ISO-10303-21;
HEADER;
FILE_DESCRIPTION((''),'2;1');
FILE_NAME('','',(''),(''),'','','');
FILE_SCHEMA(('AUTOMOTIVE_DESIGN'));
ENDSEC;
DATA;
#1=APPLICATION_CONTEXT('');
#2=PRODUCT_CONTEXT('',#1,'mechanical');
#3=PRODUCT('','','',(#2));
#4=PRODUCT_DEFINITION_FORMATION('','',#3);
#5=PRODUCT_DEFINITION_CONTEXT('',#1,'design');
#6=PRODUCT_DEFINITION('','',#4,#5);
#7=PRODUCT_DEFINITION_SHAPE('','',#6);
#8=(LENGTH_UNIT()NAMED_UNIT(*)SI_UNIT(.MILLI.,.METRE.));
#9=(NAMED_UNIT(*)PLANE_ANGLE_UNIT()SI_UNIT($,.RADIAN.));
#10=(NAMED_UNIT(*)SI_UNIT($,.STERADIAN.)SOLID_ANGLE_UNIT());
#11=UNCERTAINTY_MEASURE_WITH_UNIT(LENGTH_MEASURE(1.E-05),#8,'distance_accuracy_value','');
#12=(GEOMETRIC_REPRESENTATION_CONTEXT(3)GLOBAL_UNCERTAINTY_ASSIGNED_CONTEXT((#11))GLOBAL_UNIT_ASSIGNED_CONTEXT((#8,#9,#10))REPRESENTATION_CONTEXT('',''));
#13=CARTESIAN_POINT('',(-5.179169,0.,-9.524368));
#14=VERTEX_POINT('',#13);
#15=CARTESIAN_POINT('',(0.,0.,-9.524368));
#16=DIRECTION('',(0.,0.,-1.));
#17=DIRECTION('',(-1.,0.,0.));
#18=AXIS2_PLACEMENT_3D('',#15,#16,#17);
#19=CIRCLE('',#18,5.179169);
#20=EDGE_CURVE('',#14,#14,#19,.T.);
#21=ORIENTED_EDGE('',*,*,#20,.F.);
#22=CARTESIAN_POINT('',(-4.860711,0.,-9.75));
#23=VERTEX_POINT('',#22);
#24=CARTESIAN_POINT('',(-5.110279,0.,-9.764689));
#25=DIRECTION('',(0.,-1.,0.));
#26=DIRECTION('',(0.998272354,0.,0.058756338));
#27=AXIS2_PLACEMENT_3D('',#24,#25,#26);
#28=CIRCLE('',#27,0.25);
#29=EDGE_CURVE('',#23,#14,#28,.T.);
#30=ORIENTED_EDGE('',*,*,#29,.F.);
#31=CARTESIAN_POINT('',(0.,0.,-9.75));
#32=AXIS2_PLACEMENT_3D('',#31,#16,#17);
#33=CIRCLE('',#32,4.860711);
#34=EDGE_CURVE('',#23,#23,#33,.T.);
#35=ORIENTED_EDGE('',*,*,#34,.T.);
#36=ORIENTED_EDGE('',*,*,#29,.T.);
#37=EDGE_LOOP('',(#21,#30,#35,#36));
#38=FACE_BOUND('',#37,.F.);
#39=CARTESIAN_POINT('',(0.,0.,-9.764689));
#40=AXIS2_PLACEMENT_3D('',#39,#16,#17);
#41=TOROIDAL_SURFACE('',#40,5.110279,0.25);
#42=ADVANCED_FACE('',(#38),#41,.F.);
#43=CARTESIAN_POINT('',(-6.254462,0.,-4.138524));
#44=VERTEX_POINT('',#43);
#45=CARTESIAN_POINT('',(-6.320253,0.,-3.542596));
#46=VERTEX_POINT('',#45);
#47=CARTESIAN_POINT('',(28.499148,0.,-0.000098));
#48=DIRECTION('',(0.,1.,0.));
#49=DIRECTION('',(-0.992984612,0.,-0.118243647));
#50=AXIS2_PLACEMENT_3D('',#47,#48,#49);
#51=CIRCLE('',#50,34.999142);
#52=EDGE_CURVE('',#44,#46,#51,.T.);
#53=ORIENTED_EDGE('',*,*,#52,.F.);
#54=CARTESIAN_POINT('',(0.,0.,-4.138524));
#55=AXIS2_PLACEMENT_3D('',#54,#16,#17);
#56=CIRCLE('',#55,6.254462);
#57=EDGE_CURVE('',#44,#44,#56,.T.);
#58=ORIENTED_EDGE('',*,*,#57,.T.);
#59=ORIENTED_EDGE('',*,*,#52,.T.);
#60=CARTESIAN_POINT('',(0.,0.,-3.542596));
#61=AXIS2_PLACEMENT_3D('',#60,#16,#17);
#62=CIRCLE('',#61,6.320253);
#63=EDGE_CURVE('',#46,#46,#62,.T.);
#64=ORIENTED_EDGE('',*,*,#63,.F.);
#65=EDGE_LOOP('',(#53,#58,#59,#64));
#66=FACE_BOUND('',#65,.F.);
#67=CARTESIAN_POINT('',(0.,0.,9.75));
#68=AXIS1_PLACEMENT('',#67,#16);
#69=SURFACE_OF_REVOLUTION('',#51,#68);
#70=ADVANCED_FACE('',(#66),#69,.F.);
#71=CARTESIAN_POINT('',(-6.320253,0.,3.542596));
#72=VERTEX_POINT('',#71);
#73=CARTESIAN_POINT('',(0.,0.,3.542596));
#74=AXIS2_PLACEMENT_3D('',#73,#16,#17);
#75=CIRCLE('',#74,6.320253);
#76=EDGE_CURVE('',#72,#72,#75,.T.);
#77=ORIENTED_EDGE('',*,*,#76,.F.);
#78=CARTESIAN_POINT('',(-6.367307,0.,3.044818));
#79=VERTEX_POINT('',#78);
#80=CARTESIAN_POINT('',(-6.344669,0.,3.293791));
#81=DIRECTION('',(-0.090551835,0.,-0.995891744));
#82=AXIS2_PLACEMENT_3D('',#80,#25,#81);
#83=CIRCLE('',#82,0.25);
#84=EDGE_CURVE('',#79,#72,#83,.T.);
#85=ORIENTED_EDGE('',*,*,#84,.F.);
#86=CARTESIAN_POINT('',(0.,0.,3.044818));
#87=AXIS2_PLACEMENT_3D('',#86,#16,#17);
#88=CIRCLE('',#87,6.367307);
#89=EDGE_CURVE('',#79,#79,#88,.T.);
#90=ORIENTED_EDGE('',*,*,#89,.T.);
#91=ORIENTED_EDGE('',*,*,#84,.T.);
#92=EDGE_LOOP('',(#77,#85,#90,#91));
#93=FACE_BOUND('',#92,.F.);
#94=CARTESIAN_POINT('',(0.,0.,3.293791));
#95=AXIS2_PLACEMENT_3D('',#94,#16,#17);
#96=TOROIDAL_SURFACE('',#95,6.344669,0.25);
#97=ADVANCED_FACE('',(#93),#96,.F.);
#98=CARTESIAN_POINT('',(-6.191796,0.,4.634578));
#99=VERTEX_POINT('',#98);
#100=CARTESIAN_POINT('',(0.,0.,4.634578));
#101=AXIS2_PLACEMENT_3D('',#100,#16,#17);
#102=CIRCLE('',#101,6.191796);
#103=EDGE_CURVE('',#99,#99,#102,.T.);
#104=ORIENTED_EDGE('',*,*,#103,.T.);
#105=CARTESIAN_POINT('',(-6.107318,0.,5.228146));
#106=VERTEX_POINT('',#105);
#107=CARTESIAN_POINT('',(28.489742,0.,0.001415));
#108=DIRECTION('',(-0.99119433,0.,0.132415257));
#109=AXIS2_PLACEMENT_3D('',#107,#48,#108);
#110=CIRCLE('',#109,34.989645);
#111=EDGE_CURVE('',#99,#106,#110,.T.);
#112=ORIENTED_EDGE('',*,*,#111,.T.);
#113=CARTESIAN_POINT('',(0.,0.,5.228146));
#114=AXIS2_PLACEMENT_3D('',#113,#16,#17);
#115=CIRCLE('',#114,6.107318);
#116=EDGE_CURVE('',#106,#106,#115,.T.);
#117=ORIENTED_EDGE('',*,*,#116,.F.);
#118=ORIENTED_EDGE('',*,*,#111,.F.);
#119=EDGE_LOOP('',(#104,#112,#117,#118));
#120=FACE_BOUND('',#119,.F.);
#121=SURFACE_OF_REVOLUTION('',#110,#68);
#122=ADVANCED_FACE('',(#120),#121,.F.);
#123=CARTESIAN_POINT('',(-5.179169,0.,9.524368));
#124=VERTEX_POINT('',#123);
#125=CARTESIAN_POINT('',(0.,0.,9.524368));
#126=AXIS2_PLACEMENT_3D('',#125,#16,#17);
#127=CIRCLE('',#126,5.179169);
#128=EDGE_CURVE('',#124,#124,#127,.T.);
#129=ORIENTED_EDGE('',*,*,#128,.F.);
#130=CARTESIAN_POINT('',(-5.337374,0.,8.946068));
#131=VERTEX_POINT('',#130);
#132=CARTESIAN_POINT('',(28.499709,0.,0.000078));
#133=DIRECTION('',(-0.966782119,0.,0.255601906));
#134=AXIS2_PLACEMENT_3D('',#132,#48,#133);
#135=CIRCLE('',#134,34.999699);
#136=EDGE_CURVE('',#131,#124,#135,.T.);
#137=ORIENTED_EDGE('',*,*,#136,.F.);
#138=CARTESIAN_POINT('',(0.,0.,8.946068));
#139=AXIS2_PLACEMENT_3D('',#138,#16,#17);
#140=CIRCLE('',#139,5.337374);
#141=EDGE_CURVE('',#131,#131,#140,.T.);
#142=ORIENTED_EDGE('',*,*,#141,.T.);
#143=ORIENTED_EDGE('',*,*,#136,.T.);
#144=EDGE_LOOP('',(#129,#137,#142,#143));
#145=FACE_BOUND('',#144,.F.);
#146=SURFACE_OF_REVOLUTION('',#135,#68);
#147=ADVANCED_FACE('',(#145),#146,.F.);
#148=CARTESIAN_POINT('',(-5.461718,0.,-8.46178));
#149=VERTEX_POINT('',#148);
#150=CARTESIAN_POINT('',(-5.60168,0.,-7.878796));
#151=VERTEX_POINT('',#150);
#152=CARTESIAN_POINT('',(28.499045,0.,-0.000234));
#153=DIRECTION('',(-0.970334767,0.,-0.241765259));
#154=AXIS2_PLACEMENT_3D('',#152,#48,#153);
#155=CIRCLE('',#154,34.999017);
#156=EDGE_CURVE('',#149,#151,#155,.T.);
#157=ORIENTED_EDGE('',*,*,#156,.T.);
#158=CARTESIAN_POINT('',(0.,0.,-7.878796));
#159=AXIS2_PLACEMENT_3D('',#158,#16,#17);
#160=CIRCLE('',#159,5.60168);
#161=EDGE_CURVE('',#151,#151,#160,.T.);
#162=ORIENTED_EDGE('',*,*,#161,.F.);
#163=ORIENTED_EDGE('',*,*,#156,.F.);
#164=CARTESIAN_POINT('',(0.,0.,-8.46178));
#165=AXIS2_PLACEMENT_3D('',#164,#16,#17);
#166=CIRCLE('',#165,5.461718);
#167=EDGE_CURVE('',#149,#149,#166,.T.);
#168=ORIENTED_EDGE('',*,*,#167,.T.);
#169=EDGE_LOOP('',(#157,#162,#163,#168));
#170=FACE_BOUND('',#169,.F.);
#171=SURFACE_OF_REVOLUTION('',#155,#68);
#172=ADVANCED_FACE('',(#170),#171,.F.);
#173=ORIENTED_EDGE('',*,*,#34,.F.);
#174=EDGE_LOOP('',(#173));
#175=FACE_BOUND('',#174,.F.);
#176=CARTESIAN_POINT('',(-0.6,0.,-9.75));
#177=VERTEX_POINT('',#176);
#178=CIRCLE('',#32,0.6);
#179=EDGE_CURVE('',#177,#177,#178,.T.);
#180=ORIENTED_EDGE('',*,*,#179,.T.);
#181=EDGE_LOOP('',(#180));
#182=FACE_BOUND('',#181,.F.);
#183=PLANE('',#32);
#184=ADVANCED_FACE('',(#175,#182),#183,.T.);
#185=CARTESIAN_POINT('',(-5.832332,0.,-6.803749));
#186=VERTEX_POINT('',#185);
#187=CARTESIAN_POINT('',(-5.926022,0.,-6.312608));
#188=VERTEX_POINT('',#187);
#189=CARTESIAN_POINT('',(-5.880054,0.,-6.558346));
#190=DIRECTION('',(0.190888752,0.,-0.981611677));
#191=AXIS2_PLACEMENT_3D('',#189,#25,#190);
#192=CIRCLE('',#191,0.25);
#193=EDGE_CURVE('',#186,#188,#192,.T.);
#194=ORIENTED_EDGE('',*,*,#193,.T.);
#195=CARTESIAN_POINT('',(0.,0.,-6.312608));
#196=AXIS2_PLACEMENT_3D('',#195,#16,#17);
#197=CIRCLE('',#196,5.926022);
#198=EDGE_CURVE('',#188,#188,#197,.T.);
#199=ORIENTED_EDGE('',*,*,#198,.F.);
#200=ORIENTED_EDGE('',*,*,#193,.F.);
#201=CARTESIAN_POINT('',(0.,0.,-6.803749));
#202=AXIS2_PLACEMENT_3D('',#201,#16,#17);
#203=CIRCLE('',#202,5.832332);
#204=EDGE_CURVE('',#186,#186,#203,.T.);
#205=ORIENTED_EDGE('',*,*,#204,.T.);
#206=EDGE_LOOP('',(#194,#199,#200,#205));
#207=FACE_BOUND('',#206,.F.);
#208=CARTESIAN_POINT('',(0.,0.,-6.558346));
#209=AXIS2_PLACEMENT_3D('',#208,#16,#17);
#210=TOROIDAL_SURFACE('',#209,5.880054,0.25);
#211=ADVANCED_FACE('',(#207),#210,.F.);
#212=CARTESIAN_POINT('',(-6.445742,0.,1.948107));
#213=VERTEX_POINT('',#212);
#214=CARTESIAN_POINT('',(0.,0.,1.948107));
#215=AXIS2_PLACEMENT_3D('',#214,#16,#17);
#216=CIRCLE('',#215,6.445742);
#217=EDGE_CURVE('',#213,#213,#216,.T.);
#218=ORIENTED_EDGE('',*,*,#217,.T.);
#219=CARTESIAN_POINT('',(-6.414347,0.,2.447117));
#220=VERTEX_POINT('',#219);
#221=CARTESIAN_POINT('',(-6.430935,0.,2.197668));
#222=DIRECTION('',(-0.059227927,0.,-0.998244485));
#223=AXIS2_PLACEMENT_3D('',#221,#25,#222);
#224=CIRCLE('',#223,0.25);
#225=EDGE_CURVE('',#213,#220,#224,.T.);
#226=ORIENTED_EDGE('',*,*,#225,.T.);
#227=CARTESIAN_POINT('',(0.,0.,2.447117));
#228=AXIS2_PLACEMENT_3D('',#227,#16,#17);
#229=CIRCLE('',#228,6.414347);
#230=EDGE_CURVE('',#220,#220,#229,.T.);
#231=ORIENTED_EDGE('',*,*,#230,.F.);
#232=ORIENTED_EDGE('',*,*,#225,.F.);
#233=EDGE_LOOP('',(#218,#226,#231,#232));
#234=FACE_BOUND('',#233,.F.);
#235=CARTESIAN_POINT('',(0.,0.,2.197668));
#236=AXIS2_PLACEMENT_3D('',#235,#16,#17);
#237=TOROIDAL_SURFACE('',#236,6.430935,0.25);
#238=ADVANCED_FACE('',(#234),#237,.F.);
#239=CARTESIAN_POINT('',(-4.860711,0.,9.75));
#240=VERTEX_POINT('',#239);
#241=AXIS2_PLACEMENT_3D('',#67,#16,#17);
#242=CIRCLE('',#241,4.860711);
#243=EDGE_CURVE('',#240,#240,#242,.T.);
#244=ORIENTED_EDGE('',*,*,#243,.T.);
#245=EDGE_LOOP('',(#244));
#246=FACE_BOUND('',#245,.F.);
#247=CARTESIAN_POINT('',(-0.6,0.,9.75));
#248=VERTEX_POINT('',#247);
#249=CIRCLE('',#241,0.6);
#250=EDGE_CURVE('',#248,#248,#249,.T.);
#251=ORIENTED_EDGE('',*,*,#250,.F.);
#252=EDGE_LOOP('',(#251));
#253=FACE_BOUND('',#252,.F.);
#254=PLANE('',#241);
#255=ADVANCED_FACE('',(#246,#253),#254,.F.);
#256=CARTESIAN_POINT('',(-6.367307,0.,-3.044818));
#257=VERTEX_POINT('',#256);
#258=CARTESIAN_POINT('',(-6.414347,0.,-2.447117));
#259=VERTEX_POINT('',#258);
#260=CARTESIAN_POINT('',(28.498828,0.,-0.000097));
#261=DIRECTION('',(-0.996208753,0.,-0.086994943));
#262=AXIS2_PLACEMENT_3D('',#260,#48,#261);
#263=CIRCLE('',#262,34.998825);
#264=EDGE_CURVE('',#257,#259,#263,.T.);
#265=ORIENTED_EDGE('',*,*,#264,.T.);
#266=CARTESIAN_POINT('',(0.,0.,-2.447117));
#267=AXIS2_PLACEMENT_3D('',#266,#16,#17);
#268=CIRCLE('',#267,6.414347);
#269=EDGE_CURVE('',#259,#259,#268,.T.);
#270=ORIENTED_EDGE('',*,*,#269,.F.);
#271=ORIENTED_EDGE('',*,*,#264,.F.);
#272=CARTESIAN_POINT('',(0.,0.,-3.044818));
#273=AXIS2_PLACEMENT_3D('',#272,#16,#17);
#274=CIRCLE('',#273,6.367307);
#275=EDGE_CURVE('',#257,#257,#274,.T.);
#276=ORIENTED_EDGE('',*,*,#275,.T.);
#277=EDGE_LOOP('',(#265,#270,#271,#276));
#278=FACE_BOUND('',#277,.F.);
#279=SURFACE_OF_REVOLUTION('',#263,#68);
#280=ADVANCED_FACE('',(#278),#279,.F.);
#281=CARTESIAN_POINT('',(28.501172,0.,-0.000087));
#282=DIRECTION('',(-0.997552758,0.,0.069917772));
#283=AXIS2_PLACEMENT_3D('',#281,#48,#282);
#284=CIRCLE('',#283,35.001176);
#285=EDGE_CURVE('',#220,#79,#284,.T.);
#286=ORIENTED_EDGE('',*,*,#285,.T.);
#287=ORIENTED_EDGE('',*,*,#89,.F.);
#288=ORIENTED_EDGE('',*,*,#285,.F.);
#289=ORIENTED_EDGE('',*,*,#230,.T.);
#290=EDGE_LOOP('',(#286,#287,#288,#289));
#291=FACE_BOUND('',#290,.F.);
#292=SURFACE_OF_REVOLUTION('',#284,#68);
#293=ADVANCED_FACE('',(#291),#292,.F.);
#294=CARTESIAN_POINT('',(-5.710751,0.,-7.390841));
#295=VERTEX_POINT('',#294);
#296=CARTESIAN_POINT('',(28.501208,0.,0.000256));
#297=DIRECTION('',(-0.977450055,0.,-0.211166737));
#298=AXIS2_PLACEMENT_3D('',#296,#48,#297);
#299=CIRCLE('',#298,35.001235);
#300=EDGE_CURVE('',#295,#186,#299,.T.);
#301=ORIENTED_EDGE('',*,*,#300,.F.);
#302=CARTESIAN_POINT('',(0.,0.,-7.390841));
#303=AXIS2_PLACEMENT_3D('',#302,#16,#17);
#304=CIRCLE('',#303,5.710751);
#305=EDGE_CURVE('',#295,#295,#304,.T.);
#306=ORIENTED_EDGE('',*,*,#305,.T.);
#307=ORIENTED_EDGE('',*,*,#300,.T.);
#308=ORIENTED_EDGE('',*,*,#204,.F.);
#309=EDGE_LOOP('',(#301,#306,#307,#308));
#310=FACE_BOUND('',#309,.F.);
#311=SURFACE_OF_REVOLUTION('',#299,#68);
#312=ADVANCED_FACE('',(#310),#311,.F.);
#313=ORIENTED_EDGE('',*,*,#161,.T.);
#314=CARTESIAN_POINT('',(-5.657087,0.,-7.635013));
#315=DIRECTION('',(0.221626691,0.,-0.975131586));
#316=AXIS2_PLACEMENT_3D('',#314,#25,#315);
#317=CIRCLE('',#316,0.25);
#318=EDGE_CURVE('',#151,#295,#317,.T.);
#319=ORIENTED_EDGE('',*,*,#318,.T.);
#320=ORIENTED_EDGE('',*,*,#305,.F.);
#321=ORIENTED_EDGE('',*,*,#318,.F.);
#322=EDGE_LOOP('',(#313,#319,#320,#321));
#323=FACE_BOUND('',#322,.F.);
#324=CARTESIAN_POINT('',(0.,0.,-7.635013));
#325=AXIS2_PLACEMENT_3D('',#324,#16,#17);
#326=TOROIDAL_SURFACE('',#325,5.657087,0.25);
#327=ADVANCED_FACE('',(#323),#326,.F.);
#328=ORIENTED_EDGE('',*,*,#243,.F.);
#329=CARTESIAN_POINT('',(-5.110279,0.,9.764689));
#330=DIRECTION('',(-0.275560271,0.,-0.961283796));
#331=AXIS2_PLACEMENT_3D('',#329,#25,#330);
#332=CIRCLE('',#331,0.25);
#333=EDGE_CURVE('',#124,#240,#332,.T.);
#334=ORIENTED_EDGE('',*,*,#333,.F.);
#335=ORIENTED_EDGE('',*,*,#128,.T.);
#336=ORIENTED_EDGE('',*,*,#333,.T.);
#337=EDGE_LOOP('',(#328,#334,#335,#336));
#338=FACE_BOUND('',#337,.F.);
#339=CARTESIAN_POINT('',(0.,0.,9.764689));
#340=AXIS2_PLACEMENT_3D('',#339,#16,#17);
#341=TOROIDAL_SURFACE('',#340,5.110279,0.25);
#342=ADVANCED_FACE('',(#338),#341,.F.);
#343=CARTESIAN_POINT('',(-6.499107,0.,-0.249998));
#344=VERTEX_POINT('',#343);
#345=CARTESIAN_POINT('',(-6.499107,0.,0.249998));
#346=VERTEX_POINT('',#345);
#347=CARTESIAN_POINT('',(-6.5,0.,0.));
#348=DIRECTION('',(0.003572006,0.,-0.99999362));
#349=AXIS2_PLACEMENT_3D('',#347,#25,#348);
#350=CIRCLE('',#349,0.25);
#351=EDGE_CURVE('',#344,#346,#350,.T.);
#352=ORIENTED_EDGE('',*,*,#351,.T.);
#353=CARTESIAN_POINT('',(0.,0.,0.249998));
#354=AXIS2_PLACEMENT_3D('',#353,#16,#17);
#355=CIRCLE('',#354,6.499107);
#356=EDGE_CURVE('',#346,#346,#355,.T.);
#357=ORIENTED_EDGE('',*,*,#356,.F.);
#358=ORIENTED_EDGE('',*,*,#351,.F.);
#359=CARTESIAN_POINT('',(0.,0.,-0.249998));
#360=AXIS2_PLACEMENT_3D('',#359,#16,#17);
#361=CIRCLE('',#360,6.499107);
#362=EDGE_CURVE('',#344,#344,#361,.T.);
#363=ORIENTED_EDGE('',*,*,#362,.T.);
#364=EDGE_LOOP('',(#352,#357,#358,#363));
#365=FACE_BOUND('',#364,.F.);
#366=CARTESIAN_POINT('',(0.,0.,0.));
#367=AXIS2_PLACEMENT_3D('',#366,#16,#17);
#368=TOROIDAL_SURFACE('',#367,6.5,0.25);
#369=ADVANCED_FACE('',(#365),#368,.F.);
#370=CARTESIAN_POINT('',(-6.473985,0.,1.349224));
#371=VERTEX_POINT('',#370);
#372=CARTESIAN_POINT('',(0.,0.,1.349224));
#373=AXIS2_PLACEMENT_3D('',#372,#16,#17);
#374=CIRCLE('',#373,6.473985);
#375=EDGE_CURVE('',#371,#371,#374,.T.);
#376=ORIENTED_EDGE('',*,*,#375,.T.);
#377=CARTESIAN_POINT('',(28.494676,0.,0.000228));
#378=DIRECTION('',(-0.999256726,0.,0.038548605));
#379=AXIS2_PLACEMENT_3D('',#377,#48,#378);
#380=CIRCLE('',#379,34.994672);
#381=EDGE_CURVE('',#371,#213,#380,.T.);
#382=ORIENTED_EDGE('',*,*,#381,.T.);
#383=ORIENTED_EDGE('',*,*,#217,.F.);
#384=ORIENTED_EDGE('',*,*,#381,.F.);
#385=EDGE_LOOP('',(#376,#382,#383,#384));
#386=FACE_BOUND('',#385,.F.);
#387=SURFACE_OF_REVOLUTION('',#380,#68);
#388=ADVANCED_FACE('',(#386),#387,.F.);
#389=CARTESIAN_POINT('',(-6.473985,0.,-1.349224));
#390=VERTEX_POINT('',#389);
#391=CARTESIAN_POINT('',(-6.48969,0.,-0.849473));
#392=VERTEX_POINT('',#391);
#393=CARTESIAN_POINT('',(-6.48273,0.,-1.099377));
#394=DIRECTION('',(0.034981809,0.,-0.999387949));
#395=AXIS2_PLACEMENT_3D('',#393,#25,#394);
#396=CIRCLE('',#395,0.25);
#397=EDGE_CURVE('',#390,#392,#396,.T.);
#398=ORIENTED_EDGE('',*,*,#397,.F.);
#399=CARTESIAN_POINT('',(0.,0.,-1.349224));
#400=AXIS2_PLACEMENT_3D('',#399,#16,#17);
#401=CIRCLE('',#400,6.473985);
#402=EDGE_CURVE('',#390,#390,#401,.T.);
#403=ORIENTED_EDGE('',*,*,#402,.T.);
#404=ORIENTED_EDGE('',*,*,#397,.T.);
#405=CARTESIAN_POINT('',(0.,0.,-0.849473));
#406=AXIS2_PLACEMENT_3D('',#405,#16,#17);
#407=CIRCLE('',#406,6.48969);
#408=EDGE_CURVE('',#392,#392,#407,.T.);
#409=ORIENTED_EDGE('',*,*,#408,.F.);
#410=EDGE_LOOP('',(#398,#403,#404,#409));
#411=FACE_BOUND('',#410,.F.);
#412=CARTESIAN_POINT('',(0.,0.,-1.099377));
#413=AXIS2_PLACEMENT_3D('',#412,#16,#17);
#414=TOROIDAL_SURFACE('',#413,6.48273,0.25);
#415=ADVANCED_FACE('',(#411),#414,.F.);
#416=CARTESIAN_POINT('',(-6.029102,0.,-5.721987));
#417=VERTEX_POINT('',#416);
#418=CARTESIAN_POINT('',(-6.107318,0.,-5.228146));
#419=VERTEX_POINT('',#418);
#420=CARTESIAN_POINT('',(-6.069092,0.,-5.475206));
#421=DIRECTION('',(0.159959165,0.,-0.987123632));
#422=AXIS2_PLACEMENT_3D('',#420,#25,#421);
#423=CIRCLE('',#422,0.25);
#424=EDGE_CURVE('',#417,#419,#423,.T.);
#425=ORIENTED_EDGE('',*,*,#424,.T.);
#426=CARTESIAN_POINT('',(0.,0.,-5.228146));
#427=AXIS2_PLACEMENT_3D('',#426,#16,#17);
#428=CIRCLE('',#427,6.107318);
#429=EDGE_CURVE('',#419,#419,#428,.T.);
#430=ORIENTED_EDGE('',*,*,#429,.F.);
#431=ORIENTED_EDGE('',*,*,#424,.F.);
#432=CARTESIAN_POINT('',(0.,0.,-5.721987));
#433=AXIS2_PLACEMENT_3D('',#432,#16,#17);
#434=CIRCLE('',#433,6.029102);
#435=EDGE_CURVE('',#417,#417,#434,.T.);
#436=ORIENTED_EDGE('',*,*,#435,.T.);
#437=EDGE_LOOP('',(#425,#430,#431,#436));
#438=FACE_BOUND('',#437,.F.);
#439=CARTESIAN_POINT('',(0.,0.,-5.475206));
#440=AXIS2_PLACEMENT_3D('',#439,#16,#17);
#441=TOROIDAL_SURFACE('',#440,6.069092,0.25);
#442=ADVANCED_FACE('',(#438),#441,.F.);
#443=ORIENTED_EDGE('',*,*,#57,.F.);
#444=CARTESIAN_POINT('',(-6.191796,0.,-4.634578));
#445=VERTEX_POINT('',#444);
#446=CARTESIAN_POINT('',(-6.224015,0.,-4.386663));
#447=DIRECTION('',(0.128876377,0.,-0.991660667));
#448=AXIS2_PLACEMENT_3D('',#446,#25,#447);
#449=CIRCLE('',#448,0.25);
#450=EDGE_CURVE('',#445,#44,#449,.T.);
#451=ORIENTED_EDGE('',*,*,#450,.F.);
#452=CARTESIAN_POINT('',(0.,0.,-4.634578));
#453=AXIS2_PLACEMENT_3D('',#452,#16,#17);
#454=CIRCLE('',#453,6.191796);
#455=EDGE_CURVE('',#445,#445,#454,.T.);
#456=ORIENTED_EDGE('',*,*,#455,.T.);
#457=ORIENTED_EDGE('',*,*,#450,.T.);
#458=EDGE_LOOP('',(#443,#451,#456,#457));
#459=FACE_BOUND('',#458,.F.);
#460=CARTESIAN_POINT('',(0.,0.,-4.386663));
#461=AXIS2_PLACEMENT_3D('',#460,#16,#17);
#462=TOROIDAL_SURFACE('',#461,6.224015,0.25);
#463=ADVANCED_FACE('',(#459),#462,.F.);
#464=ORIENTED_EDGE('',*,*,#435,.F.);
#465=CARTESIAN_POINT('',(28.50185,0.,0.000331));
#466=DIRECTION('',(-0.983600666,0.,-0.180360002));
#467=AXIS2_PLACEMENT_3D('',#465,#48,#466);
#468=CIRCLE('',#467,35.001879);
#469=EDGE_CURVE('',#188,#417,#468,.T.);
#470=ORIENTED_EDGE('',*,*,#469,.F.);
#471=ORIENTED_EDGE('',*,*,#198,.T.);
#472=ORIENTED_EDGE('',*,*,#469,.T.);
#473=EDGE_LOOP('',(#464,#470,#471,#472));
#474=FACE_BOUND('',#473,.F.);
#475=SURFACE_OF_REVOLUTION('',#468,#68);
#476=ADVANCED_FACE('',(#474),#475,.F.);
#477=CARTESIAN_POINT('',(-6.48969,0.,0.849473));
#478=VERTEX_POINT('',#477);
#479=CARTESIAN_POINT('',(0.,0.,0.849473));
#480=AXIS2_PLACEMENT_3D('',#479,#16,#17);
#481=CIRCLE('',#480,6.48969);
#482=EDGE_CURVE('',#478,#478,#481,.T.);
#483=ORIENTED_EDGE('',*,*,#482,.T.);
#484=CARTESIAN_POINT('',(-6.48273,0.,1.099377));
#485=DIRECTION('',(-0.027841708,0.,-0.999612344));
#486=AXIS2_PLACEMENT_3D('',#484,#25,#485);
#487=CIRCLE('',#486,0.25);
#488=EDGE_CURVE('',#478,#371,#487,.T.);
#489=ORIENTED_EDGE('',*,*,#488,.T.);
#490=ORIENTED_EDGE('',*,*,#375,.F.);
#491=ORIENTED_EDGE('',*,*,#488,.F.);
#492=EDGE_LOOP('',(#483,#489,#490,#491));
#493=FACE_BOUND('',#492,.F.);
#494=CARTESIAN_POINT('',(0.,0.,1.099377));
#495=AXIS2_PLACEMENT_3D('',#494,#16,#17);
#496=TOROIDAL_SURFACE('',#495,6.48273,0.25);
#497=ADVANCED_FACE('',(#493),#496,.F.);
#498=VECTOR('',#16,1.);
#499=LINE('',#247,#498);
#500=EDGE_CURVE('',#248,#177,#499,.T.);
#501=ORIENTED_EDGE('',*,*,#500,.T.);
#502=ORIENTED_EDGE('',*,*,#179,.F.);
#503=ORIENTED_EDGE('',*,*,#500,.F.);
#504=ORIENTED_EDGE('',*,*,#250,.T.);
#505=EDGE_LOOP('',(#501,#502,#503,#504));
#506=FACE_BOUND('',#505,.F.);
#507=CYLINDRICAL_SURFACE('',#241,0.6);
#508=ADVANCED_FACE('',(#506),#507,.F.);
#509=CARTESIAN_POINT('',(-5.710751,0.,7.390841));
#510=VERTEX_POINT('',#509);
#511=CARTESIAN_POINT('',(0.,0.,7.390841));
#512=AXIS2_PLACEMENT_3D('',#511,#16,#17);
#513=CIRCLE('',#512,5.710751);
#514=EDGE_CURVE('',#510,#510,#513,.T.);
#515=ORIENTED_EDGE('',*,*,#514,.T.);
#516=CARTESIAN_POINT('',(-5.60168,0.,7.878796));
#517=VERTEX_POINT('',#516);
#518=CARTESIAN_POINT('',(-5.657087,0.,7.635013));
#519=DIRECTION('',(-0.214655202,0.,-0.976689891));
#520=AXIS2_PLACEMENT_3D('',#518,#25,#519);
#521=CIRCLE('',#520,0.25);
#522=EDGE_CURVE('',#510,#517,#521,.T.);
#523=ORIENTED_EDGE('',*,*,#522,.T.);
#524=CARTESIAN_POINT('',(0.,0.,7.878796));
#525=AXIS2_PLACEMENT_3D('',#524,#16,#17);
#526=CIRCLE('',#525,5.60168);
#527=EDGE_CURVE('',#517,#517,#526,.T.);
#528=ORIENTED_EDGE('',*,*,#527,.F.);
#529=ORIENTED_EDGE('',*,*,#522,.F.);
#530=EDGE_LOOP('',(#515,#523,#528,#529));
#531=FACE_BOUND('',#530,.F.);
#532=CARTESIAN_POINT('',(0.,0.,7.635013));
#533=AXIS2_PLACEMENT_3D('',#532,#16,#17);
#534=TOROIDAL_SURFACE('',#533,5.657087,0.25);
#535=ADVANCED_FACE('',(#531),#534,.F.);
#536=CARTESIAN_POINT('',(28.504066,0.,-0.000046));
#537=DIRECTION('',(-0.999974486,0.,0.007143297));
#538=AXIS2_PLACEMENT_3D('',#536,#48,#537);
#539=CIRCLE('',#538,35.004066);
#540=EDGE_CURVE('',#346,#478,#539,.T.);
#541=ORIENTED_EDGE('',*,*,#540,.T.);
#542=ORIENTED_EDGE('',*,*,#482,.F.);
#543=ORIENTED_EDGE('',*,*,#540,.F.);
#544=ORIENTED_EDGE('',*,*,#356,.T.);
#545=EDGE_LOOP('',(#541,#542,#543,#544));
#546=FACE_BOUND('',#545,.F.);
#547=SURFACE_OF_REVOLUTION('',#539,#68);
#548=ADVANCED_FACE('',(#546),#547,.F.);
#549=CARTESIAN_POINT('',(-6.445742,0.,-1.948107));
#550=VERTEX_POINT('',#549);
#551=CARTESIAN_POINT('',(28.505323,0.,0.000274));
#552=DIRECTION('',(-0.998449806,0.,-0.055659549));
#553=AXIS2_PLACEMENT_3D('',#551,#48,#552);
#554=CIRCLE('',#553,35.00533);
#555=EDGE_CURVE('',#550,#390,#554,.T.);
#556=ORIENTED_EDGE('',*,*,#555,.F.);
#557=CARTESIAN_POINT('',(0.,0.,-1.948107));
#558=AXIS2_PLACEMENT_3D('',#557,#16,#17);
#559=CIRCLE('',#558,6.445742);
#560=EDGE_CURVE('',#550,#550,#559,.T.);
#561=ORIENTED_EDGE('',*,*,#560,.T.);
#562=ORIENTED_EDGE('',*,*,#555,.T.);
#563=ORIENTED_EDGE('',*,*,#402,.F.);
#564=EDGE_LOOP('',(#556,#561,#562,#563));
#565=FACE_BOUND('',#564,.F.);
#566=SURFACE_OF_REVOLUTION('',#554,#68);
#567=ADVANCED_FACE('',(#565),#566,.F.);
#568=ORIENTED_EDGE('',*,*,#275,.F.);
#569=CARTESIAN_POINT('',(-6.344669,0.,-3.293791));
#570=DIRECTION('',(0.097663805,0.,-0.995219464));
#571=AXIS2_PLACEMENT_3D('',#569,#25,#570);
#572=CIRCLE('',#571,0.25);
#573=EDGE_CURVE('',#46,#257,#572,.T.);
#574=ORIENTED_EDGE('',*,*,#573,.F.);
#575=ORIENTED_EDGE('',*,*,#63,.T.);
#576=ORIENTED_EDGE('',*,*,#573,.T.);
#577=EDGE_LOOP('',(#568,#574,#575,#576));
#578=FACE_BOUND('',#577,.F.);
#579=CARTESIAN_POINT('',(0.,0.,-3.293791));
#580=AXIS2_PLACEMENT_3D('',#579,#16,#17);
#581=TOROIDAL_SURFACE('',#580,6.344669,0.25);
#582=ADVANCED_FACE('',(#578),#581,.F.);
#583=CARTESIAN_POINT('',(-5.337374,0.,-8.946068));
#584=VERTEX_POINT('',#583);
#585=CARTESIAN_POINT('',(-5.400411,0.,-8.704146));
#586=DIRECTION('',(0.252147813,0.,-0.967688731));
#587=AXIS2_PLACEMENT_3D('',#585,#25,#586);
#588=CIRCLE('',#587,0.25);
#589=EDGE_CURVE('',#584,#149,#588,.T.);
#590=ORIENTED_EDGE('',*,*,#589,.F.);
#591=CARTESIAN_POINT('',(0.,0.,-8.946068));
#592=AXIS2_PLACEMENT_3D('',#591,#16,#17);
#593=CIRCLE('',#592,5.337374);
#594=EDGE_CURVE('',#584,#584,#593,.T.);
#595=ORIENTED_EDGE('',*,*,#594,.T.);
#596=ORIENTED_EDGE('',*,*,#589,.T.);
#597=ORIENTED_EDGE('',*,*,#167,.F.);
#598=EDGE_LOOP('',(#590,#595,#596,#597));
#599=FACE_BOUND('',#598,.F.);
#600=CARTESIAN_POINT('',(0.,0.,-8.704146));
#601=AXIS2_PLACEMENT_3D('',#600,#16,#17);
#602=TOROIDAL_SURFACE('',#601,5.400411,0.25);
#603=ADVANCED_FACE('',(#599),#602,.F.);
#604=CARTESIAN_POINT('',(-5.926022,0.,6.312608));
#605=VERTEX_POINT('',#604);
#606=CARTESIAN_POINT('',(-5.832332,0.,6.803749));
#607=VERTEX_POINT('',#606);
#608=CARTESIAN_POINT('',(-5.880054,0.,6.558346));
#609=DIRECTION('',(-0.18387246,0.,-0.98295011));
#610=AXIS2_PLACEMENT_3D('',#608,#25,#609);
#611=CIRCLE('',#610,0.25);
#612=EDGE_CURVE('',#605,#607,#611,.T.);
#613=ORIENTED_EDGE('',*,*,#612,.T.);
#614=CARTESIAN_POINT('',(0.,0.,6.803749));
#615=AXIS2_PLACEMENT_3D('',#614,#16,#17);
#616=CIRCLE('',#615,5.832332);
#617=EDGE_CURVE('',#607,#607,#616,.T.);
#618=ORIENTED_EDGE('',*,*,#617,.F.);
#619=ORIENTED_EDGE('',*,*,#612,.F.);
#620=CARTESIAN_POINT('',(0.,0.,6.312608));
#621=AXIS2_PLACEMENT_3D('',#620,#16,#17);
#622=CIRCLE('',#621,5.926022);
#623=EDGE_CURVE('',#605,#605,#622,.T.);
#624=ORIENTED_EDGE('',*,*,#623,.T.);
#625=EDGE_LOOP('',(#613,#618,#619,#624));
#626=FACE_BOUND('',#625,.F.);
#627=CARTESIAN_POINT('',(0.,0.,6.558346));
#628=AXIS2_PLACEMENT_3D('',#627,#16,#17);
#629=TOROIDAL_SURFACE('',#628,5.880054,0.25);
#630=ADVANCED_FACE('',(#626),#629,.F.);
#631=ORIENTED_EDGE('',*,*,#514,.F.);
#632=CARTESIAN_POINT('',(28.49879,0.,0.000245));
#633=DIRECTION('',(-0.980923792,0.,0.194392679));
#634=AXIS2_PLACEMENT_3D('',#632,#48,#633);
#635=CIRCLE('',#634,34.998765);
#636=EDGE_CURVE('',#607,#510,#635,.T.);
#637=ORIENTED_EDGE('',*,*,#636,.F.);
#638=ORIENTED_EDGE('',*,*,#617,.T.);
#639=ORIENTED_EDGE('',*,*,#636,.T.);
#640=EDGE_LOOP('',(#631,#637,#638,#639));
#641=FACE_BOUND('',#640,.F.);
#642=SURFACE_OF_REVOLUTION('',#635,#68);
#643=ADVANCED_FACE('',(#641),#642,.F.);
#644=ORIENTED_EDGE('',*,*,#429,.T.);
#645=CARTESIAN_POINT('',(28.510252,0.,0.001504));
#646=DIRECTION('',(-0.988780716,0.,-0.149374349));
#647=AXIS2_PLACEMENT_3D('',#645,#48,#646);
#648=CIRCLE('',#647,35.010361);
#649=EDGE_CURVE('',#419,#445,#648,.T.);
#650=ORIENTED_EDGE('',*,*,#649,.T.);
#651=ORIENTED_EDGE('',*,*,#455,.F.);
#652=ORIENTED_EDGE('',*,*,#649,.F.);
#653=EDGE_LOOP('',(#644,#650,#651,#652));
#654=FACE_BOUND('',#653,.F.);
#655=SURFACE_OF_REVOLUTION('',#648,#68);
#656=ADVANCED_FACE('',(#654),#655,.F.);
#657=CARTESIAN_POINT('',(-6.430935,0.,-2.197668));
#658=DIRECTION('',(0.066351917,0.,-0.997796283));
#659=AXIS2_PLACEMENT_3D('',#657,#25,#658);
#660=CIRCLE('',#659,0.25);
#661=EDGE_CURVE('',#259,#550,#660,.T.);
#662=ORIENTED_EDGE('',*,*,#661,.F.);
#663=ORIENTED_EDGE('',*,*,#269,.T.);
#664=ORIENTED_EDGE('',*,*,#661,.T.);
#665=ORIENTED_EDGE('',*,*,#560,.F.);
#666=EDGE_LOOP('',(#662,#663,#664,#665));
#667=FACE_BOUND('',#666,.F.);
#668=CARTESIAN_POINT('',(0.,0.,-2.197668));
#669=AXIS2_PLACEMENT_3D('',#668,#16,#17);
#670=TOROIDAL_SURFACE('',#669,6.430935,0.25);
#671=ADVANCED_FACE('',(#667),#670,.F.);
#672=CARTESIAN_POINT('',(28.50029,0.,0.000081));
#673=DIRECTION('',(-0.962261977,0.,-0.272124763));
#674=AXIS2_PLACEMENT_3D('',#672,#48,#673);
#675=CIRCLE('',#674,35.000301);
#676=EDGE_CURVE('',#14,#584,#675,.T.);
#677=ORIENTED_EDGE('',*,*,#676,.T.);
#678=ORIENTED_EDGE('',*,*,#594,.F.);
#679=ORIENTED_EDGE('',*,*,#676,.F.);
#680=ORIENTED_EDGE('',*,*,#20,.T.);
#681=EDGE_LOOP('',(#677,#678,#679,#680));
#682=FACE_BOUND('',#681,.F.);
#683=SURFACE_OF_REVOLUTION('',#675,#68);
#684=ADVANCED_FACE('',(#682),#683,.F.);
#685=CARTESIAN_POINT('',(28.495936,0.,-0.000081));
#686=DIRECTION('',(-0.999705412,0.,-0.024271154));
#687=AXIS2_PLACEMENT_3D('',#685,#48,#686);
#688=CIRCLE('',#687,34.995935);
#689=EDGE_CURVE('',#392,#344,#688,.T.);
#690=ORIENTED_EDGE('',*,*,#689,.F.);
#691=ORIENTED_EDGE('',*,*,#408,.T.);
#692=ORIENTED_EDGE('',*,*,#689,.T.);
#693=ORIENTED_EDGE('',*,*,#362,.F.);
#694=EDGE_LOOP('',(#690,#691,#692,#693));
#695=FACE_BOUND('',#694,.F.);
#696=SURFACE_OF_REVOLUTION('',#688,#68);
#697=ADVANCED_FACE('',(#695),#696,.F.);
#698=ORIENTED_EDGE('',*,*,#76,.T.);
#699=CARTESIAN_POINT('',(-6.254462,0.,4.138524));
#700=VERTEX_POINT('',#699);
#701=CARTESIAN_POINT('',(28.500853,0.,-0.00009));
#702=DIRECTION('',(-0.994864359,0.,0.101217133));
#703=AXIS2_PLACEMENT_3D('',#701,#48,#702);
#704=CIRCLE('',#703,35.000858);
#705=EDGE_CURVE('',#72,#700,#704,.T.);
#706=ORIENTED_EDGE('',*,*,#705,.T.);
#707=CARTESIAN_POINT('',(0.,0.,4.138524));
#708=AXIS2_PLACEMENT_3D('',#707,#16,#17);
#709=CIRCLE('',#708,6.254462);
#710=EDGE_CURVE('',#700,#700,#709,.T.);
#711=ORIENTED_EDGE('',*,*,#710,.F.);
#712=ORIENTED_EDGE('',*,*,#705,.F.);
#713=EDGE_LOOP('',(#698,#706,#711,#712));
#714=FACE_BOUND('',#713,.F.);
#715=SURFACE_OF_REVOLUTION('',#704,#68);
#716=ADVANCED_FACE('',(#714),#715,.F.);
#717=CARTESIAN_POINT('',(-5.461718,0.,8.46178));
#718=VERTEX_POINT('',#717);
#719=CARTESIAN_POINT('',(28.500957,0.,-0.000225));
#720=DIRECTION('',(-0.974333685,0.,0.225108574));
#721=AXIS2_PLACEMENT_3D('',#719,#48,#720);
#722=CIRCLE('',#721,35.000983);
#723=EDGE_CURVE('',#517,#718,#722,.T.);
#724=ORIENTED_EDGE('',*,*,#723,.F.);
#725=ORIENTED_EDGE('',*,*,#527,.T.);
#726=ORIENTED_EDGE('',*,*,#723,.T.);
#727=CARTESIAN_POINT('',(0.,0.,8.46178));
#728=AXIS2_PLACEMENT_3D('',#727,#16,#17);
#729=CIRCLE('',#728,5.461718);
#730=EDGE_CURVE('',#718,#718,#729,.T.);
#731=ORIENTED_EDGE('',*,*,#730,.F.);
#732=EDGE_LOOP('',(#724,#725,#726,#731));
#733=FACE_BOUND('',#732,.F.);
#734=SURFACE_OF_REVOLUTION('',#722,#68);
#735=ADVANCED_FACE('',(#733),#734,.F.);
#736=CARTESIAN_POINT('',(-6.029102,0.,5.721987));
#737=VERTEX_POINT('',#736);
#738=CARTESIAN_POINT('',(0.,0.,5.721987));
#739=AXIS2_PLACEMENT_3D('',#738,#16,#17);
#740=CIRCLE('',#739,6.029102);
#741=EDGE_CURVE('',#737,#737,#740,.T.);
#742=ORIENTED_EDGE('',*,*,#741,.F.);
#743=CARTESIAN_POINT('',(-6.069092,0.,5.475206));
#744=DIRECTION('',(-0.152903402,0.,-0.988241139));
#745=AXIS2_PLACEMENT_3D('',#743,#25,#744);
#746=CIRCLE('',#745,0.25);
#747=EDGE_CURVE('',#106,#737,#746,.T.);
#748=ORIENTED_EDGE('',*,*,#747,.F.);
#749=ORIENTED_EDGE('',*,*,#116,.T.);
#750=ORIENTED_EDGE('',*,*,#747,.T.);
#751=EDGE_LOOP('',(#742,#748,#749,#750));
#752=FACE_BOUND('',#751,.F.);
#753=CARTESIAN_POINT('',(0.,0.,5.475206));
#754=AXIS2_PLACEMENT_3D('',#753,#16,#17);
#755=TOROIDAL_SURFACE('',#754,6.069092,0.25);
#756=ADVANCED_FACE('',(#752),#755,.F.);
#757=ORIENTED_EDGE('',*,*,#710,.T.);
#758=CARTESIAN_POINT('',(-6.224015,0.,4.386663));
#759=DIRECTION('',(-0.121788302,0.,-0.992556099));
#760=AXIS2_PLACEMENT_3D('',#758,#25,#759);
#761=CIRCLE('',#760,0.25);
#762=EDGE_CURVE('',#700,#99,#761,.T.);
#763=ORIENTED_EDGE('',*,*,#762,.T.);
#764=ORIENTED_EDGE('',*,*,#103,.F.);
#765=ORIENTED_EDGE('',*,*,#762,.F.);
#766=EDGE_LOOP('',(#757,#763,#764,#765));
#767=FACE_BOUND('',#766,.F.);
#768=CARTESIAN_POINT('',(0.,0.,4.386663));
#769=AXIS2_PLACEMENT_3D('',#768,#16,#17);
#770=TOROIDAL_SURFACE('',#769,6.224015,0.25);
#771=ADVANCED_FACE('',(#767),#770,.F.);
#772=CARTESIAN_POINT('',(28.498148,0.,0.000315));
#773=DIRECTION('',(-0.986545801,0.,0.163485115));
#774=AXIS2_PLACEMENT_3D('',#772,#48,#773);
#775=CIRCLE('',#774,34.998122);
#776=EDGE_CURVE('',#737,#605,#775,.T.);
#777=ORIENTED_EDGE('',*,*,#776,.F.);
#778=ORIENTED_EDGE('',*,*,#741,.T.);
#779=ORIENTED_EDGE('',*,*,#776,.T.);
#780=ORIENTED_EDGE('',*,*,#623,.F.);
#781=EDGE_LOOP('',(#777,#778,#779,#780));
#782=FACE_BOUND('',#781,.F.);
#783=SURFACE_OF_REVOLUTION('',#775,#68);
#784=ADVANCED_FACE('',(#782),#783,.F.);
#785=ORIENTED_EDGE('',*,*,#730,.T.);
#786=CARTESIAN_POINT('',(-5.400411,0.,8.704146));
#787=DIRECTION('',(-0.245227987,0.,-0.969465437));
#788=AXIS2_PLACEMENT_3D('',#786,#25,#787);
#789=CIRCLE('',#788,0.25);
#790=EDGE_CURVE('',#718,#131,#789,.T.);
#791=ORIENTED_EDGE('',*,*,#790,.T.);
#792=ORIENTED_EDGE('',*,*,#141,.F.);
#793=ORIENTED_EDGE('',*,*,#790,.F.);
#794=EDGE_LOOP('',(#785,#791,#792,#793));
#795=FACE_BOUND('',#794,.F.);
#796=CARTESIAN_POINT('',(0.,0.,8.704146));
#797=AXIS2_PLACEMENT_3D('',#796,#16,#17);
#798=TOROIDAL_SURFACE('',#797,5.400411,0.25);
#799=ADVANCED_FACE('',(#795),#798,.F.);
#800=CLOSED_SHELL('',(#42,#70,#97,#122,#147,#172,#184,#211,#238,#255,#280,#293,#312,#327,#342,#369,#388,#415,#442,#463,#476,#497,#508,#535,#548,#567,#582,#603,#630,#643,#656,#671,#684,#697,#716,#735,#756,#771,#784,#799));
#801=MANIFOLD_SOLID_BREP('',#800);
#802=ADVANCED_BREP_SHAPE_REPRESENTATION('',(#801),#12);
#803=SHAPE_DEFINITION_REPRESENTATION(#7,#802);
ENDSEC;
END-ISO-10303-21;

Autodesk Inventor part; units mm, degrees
ref_plane "YZ Plane" through (0, 0, 0) normal (1, 0, 0) x (0, 1, 0)
ref_plane "XZ Plane" through (0, 0, 0) normal (0, 1, 0) x (-1, 0, 0)
ref_plane "XY Plane" through (0, 0, 0) normal (0, 0, 1) x (1, 0, 0)
sketch "Sketch1" plane through (0, 0, 0) normal (0, 1, 0) x (-1, 0, 0)
  line L0 (6.5, 9.75) -> (0, 9.75)
  line L1 (0, 9.75) -> (0, -9.75)
  line L2 (0, -9.75) -> (6.5, -9.75)
  line L3 (6.5, -9.75) -> (6.5, 9.75)
  line L4 (0.6, 9.75) -> (0.6, -9.75)
  arc A0 (5.114543, -9.75) -> (5.114543, 9.75) centre (-28.5, 0) ccw
  circle A1 centre (6.5, 0) radius 0.25
  circle A2 centre (6.48273, 1.099377) radius 0.25
  circle A3 centre (6.430935, 2.197668) radius 0.25
  circle A4 centre (6.344669, 3.293791) radius 0.25
  circle A5 centre (6.224015, 4.386663) radius 0.25
  circle A6 centre (6.069092, 5.475206) radius 0.25
  circle A7 centre (5.880054, 6.558346) radius 0.25
  circle A8 centre (5.657087, 7.635013) radius 0.25
  circle A9 centre (5.400411, 8.704146) radius 0.25
  circle A10 centre (5.110279, 9.764689) radius 0.25
  circle A11 centre (4.786978, 10.815595) radius 0.25
  circle A12 centre (4.430827, 11.855827) radius 0.25
  circle A13 centre (4.042177, 12.884359) radius 0.25
  circle A14 centre (3.621412, 13.900176) radius 0.25
  circle A15 centre (3.168947, 14.902275) radius 0.25
  circle A16 centre (2.685228, 15.889667) radius 0.25
  circle A17 centre (2.170734, 16.861379) radius 0.25
  circle A18 centre (1.625971, 17.81645) radius 0.25
  circle A19 centre (1.051477, 18.753938) radius 0.25
  circle A20 centre (0.44782, 19.672918) radius 0.25
  circle A21 centre (-0.184405, 20.572484) radius 0.25
  circle A22 centre (-0.844575, 21.451747) radius 0.25
  circle A23 centre (-1.532037, 22.30984) radius 0.25
  circle A24 centre (-2.246113, 23.145915) radius 0.25
  circle A25 centre (-2.986098, 23.959149) radius 0.25
  circle A26 centre (-3.751263, 24.748737) radius 0.25
  circle A27 centre (-4.540851, 25.513902) radius 0.25
  circle A28 centre (-5.354085, 26.253887) radius 0.25
  circle A29 centre (-6.19016, 26.967963) radius 0.25
  circle A30 centre (-7.048253, 27.655425) radius 0.25
  circle A31 centre (-7.927516, 28.315595) radius 0.25
  circle A32 centre (-8.827082, 28.94782) radius 0.25
  circle A33 centre (-9.746062, 29.551477) radius 0.25
  circle A34 centre (-10.68355, 30.125971) radius 0.25
  circle A35 centre (-11.638621, 30.670734) radius 0.25
  circle A36 centre (-12.610333, 31.185228) radius 0.25
  circle A37 centre (-13.597725, 31.668947) radius 0.25
  circle A38 centre (-14.599824, 32.121412) radius 0.25
  circle A39 centre (-15.615641, 32.542177) radius 0.25
  circle A40 centre (-16.644173, 32.930827) radius 0.25
  circle A41 centre (-17.684405, 33.286978) radius 0.25
  circle A42 centre (-18.735311, 33.610279) radius 0.25
  circle A43 centre (-19.795854, 33.900411) radius 0.25
  circle A44 centre (-20.864987, 34.157087) radius 0.25
  circle A45 centre (-21.941654, 34.380054) radius 0.25
  circle A46 centre (-23.024794, 34.569092) radius 0.25
  circle A47 centre (-24.113337, 34.724015) radius 0.25
  circle A48 centre (-25.206209, 34.844669) radius 0.25
  circle A49 centre (-26.302332, 34.930935) radius 0.25
  circle A50 centre (-27.400623, 34.98273) radius 0.25
  circle A51 centre (-28.5, 35) radius 0.25
  circle A52 centre (-29.599377, 34.98273) radius 0.25
  circle A53 centre (-30.697668, 34.930935) radius 0.25
  circle A54 centre (-31.793791, 34.844669) radius 0.25
  circle A55 centre (-32.886663, 34.724015) radius 0.25
  circle A56 centre (-33.975206, 34.569092) radius 0.25
  circle A57 centre (-35.058346, 34.380054) radius 0.25
  circle A58 centre (-36.135013, 34.157087) radius 0.25
  circle A59 centre (-37.204146, 33.900411) radius 0.25
  circle A60 centre (-38.264689, 33.610279) radius 0.25
  circle A61 centre (-39.315595, 33.286978) radius 0.25
  circle A62 centre (-40.355827, 32.930827) radius 0.25
  circle A63 centre (-41.384359, 32.542177) radius 0.25
  circle A64 centre (-42.400176, 32.121412) radius 0.25
  circle A65 centre (-43.402275, 31.668947) radius 0.25
  circle A66 centre (-44.389667, 31.185228) radius 0.25
  circle A67 centre (-45.361379, 30.670734) radius 0.25
  circle A68 centre (-46.31645, 30.125971) radius 0.25
  circle A69 centre (-47.253938, 29.551477) radius 0.25
  circle A70 centre (-48.172918, 28.94782) radius 0.25
  circle A71 centre (-49.072484, 28.315595) radius 0.25
  circle A72 centre (-49.951747, 27.655425) radius 0.25
  circle A73 centre (-50.80984, 26.967963) radius 0.25
  circle A74 centre (-51.645915, 26.253887) radius 0.25
  circle A75 centre (-52.459149, 25.513902) radius 0.25
  circle A76 centre (-53.248737, 24.748737) radius 0.25
  circle A77 centre (-54.013902, 23.959149) radius 0.25
  circle A78 centre (-54.753887, 23.145915) radius 0.25
  circle A79 centre (-55.467963, 22.30984) radius 0.25
  circle A80 centre (-56.155425, 21.451747) radius 0.25
  circle A81 centre (-56.815595, 20.572484) radius 0.25
  circle A82 centre (-57.44782, 19.672918) radius 0.25
  circle A83 centre (-58.051477, 18.753938) radius 0.25
  circle A84 centre (-58.625971, 17.81645) radius 0.25
  circle A85 centre (-59.170734, 16.861379) radius 0.25
  circle A86 centre (-59.685228, 15.889667) radius 0.25
  circle A87 centre (-60.168947, 14.902275) radius 0.25
  circle A88 centre (-60.621412, 13.900176) radius 0.25
  circle A89 centre (-61.042177, 12.884359) radius 0.25
  circle A90 centre (-61.430827, 11.855827) radius 0.25
  circle A91 centre (-61.786978, 10.815595) radius 0.25
  circle A92 centre (-62.110279, 9.764689) radius 0.25
  circle A93 centre (-62.400411, 8.704146) radius 0.25
  circle A94 centre (-62.657087, 7.635013) radius 0.25
  circle A95 centre (-62.880054, 6.558346) radius 0.25
  circle A96 centre (-63.069092, 5.475206) radius 0.25
  circle A97 centre (-63.224015, 4.386663) radius 0.25
  circle A98 centre (-63.344669, 3.293791) radius 0.25
  circle A99 centre (-63.430935, 2.197668) radius 0.25
  circle A100 centre (-63.48273, 1.099377) radius 0.25
  circle A101 centre (-63.5, 0) radius 0.25
  circle A102 centre (-63.48273, -1.099377) radius 0.25
  circle A103 centre (-63.430935, -2.197668) radius 0.25
  circle A104 centre (-63.344669, -3.293791) radius 0.25
  circle A105 centre (-63.224015, -4.386663) radius 0.25
  circle A106 centre (-63.069092, -5.475206) radius 0.25
  circle A107 centre (-62.880054, -6.558346) radius 0.25
  circle A108 centre (-62.657087, -7.635013) radius 0.25
  circle A109 centre (-62.400411, -8.704146) radius 0.25
  circle A110 centre (-62.110279, -9.764689) radius 0.25
  circle A111 centre (-61.786978, -10.815595) radius 0.25
  circle A112 centre (-61.430827, -11.855827) radius 0.25
  circle A113 centre (-61.042177, -12.884359) radius 0.25
  circle A114 centre (-60.621412, -13.900176) radius 0.25
  circle A115 centre (-60.168947, -14.902275) radius 0.25
  circle A116 centre (-59.685228, -15.889667) radius 0.25
  circle A117 centre (-59.170734, -16.861379) radius 0.25
  circle A118 centre (-58.625971, -17.81645) radius 0.25
  circle A119 centre (-58.051477, -18.753938) radius 0.25
  circle A120 centre (-57.44782, -19.672918) radius 0.25
  circle A121 centre (-56.815595, -20.572484) radius 0.25
  circle A122 centre (-56.155425, -21.451747) radius 0.25
  circle A123 centre (-55.467963, -22.30984) radius 0.25
  circle A124 centre (-54.753887, -23.145915) radius 0.25
  circle A125 centre (-54.013902, -23.959149) radius 0.25
  circle A126 centre (-53.248737, -24.748737) radius 0.25
  circle A127 centre (-52.459149, -25.513902) radius 0.25
  circle A128 centre (-51.645915, -26.253887) radius 0.25
  circle A129 centre (-50.80984, -26.967963) radius 0.25
  circle A130 centre (-49.951747, -27.655425) radius 0.25
  circle A131 centre (-49.072484, -28.315595) radius 0.25
  circle A132 centre (-48.172918, -28.94782) radius 0.25
  circle A133 centre (-47.253938, -29.551477) radius 0.25
  circle A134 centre (-46.31645, -30.125971) radius 0.25
  circle A135 centre (-45.361379, -30.670734) radius 0.25
  circle A136 centre (-44.389667, -31.185228) radius 0.25
  circle A137 centre (-43.402275, -31.668947) radius 0.25
  circle A138 centre (-42.400176, -32.121412) radius 0.25
  circle A139 centre (-41.384359, -32.542177) radius 0.25
  circle A140 centre (-40.355827, -32.930827) radius 0.25
  circle A141 centre (-39.315595, -33.286978) radius 0.25
  circle A142 centre (-38.264689, -33.610279) radius 0.25
  circle A143 centre (-37.204146, -33.900411) radius 0.25
  circle A144 centre (-36.135013, -34.157087) radius 0.25
  circle A145 centre (-35.058346, -34.380054) radius 0.25
  circle A146 centre (-33.975206, -34.569092) radius 0.25
  circle A147 centre (-32.886663, -34.724015) radius 0.25
  circle A148 centre (-31.793791, -34.844669) radius 0.25
  circle A149 centre (-30.697668, -34.930935) radius 0.25
  circle A150 centre (-29.599377, -34.98273) radius 0.25
  circle A151 centre (-28.5, -35) radius 0.25
  circle A152 centre (-27.400623, -34.98273) radius 0.25
  circle A153 centre (-26.302332, -34.930935) radius 0.25
  circle A154 centre (-25.206209, -34.844669) radius 0.25
  circle A155 centre (-24.113337, -34.724015) radius 0.25
  circle A156 centre (-23.024794, -34.569092) radius 0.25
  circle A157 centre (-21.941654, -34.380054) radius 0.25
  circle A158 centre (-20.864987, -34.157087) radius 0.25
  circle A159 centre (-19.795854, -33.900411) radius 0.25
  circle A160 centre (-18.735311, -33.610279) radius 0.25
  circle A161 centre (-17.684405, -33.286978) radius 0.25
  circle A162 centre (-16.644173, -32.930827) radius 0.25
  circle A163 centre (-15.615641, -32.542177) radius 0.25
  circle A164 centre (-14.599824, -32.121412) radius 0.25
  circle A165 centre (-13.597725, -31.668947) radius 0.25
  circle A166 centre (-12.610333, -31.185228) radius 0.25
  circle A167 centre (-11.638621, -30.670734) radius 0.25
  circle A168 centre (-10.68355, -30.125971) radius 0.25
  circle A169 centre (-9.746062, -29.551477) radius 0.25
  circle A170 centre (-8.827082, -28.94782) radius 0.25
  circle A171 centre (-7.927516, -28.315595) radius 0.25
  circle A172 centre (-7.048253, -27.655425) radius 0.25
  circle A173 centre (-6.19016, -26.967963) radius 0.25
  circle A174 centre (-5.354085, -26.253887) radius 0.25
  circle A175 centre (-4.540851, -25.513902) radius 0.25
  circle A176 centre (-3.751263, -24.748737) radius 0.25
  circle A177 centre (-2.986098, -23.959149) radius 0.25
  circle A178 centre (-2.246113, -23.145915) radius 0.25
  circle A179 centre (-1.532037, -22.30984) radius 0.25
  circle A180 centre (-0.844575, -21.451747) radius 0.25
  circle A181 centre (-0.184405, -20.572484) radius 0.25
  circle A182 centre (0.44782, -19.672918) radius 0.25
  circle A183 centre (1.051477, -18.753938) radius 0.25
  circle A184 centre (1.625971, -17.81645) radius 0.25
  circle A185 centre (2.170734, -16.861379) radius 0.25
  circle A186 centre (2.685228, -15.889667) radius 0.25
  circle A187 centre (3.168947, -14.902275) radius 0.25
  circle A188 centre (3.621412, -13.900176) radius 0.25
  circle A189 centre (4.042177, -12.884359) radius 0.25
  circle A190 centre (4.430827, -11.855827) radius 0.25
  circle A191 centre (4.786978, -10.815595) radius 0.25
  circle A192 centre (5.110279, -9.764689) radius 0.25
  circle A193 centre (5.400411, -8.704146) radius 0.25
  circle A194 centre (5.657087, -7.635013) radius 0.25
  circle A195 centre (5.880054, -6.558346) radius 0.25
  circle A196 centre (6.069092, -5.475206) radius 0.25
  circle A197 centre (6.224015, -4.386663) radius 0.25
  circle A198 centre (6.344669, -3.293791) radius 0.25
  circle A199 centre (6.430935, -2.197668) radius 0.25
  circle A200 centre (6.48273, -1.099377) radius 0.25
  point P0 (0, 0)
  point P1 (6.473985, -1.349224)
  point P2 (6.48969, -0.849473)
  point P3 (6.499107, -0.249998)
  point P4 (6.499107, 0.249998)
  point P5 (6.48969, 0.849473)
  point P6 (6.473985, 1.349224)
  point P7 (6.445742, 1.948107)
  point P8 (6.414347, 2.447117)
  point P9 (6.367307, 3.044818)
  point P10 (6.320253, 3.542596)
  point P11 (6.254462, 4.138524)
  point P12 (6.191796, 4.634578)
  point P13 (6.107318, 5.228146)
  point P14 (6.029102, 5.721987)
  point P15 (5.926022, 6.312608)
  point P16 (5.832332, 6.803749)
  point P17 (5.710751, 7.390841)
  point P18 (5.60168, 7.878796)
  point P19 (5.461718, 8.46178)
  point P20 (5.337374, 8.946068)
  point P21 (5.179169, 9.524368)
  point P22 (4.860711, 9.75)
  point P23 (4.860711, -9.75)
  point P24 (5.179169, -9.524368)
  point P25 (5.337374, -8.946068)
  point P26 (5.461718, -8.46178)
  point P27 (5.60168, -7.878796)
  point P28 (5.710751, -7.390841)
  point P29 (5.832332, -6.803749)
  point P30 (5.926022, -6.312608)
  point P31 (6.029102, -5.721987)
  point P32 (6.107318, -5.228146)
  point P33 (6.191796, -4.634578)
  point P34 (6.254462, -4.138524)
  point P35 (6.320253, -3.542596)
  point P36 (6.367307, -3.044818)
  point P37 (6.414347, -2.447117)
  point P38 (6.445742, -1.948107)
  dimension "d3" = 35
  dimension "d0" = 6.5
  dimension "d1" = 19.5
  dimension "d2" = 0.6
  dimension "d5" = 0.5
  dimension "d8" = 360
sketch "Sketch1 outline for Revolution1" plane through (0, 0, 0) normal (0, 1, 0) x (-1, 0, 0)
  arc A0 (6.473985, -1.349224) -> (6.48969, -0.849473) centre (6.48273, -1.099377) cw
  arc A1 (6.445742, -1.948107) -> (6.473985, -1.349224) centre (-28.5, 0) ccw
  arc A2 (6.414347, -2.447117) -> (6.445742, -1.948107) centre (6.430935, -2.197668) cw
  arc A3 (6.367307, -3.044818) -> (6.414347, -2.447117) centre (-28.5, 0) ccw
  arc A4 (6.320253, -3.542596) -> (6.367307, -3.044818) centre (6.344669, -3.293791) cw
  arc A5 (6.254462, -4.138524) -> (6.320253, -3.542596) centre (-28.5, 0) ccw
  arc A6 (6.191796, -4.634578) -> (6.254462, -4.138524) centre (6.224015, -4.386663) cw
  arc A7 (6.107318, -5.228146) -> (6.191796, -4.634578) centre (-28.5, 0) ccw
  arc A8 (6.029102, -5.721987) -> (6.107318, -5.228146) centre (6.069092, -5.475206) cw
  arc A9 (5.926022, -6.312608) -> (6.029102, -5.721987) centre (-28.5, 0) ccw
  arc A10 (5.832332, -6.803749) -> (5.926022, -6.312608) centre (5.880054, -6.558346) cw
  arc A11 (5.710751, -7.390841) -> (5.832332, -6.803749) centre (-28.5, 0) ccw
  arc A12 (5.60168, -7.878796) -> (5.710751, -7.390841) centre (5.657087, -7.635013) cw
  arc A13 (5.461718, -8.46178) -> (5.60168, -7.878796) centre (-28.5, 0) ccw
  arc A14 (5.337374, -8.946068) -> (5.461718, -8.46178) centre (5.400411, -8.704146) cw
  arc A15 (5.179169, -9.524368) -> (5.337374, -8.946068) centre (-28.5, 0) ccw
  arc A16 (4.860711, -9.75) -> (5.179169, -9.524368) centre (5.110279, -9.764689) cw
  line L0 (0.6, -9.75) -> (4.860711, -9.75)
  line L1 (0.6, 9.75) -> (0.6, -9.75)
  line L2 (4.860711, 9.75) -> (0.6, 9.75)
  arc A17 (5.179169, 9.524368) -> (4.860711, 9.75) centre (5.110279, 9.764689) cw
  arc A18 (5.337374, 8.946068) -> (5.179169, 9.524368) centre (-28.5, 0) ccw
  arc A19 (5.461718, 8.46178) -> (5.337374, 8.946068) centre (5.400411, 8.704146) cw
  arc A20 (5.60168, 7.878796) -> (5.461718, 8.46178) centre (-28.5, 0) ccw
  arc A21 (5.710751, 7.390841) -> (5.60168, 7.878796) centre (5.657087, 7.635013) cw
  arc A22 (5.832332, 6.803749) -> (5.710751, 7.390841) centre (-28.5, 0) ccw
  arc A23 (5.926022, 6.312608) -> (5.832332, 6.803749) centre (5.880054, 6.558346) cw
  arc A24 (6.029102, 5.721987) -> (5.926022, 6.312608) centre (-28.5, 0) ccw
  arc A25 (6.107318, 5.228146) -> (6.029102, 5.721987) centre (6.069092, 5.475206) cw
  arc A26 (6.191796, 4.634578) -> (6.107318, 5.228146) centre (-28.5, 0) ccw
  arc A27 (6.254462, 4.138524) -> (6.191796, 4.634578) centre (6.224015, 4.386663) cw
  arc A28 (6.320253, 3.542596) -> (6.254462, 4.138524) centre (-28.5, 0) ccw
  arc A29 (6.367307, 3.044818) -> (6.320253, 3.542596) centre (6.344669, 3.293791) cw
  arc A30 (6.414347, 2.447117) -> (6.367307, 3.044818) centre (-28.5, 0) ccw
  arc A31 (6.445742, 1.948107) -> (6.414347, 2.447117) centre (6.430935, 2.197668) cw
  arc A32 (6.473985, 1.349224) -> (6.445742, 1.948107) centre (-28.5, 0) ccw
  arc A33 (6.48969, 0.849473) -> (6.473985, 1.349224) centre (6.48273, 1.099377) cw
  arc A34 (6.499107, 0.249998) -> (6.48969, 0.849473) centre (-28.5, 0) ccw
  arc A35 (6.499107, -0.249998) -> (6.499107, 0.249998) centre (6.5, 0) cw
  arc A36 (6.48969, -0.849473) -> (6.499107, -0.249998) centre (-28.5, 0) ccw
revolve "Revolution1" add sketch "Sketch1 outline for Revolution1" angle 360 about axis through (0, 0, 9.75) along (0, 0, -1)
properties part number "roller-5" material "Rubber"
